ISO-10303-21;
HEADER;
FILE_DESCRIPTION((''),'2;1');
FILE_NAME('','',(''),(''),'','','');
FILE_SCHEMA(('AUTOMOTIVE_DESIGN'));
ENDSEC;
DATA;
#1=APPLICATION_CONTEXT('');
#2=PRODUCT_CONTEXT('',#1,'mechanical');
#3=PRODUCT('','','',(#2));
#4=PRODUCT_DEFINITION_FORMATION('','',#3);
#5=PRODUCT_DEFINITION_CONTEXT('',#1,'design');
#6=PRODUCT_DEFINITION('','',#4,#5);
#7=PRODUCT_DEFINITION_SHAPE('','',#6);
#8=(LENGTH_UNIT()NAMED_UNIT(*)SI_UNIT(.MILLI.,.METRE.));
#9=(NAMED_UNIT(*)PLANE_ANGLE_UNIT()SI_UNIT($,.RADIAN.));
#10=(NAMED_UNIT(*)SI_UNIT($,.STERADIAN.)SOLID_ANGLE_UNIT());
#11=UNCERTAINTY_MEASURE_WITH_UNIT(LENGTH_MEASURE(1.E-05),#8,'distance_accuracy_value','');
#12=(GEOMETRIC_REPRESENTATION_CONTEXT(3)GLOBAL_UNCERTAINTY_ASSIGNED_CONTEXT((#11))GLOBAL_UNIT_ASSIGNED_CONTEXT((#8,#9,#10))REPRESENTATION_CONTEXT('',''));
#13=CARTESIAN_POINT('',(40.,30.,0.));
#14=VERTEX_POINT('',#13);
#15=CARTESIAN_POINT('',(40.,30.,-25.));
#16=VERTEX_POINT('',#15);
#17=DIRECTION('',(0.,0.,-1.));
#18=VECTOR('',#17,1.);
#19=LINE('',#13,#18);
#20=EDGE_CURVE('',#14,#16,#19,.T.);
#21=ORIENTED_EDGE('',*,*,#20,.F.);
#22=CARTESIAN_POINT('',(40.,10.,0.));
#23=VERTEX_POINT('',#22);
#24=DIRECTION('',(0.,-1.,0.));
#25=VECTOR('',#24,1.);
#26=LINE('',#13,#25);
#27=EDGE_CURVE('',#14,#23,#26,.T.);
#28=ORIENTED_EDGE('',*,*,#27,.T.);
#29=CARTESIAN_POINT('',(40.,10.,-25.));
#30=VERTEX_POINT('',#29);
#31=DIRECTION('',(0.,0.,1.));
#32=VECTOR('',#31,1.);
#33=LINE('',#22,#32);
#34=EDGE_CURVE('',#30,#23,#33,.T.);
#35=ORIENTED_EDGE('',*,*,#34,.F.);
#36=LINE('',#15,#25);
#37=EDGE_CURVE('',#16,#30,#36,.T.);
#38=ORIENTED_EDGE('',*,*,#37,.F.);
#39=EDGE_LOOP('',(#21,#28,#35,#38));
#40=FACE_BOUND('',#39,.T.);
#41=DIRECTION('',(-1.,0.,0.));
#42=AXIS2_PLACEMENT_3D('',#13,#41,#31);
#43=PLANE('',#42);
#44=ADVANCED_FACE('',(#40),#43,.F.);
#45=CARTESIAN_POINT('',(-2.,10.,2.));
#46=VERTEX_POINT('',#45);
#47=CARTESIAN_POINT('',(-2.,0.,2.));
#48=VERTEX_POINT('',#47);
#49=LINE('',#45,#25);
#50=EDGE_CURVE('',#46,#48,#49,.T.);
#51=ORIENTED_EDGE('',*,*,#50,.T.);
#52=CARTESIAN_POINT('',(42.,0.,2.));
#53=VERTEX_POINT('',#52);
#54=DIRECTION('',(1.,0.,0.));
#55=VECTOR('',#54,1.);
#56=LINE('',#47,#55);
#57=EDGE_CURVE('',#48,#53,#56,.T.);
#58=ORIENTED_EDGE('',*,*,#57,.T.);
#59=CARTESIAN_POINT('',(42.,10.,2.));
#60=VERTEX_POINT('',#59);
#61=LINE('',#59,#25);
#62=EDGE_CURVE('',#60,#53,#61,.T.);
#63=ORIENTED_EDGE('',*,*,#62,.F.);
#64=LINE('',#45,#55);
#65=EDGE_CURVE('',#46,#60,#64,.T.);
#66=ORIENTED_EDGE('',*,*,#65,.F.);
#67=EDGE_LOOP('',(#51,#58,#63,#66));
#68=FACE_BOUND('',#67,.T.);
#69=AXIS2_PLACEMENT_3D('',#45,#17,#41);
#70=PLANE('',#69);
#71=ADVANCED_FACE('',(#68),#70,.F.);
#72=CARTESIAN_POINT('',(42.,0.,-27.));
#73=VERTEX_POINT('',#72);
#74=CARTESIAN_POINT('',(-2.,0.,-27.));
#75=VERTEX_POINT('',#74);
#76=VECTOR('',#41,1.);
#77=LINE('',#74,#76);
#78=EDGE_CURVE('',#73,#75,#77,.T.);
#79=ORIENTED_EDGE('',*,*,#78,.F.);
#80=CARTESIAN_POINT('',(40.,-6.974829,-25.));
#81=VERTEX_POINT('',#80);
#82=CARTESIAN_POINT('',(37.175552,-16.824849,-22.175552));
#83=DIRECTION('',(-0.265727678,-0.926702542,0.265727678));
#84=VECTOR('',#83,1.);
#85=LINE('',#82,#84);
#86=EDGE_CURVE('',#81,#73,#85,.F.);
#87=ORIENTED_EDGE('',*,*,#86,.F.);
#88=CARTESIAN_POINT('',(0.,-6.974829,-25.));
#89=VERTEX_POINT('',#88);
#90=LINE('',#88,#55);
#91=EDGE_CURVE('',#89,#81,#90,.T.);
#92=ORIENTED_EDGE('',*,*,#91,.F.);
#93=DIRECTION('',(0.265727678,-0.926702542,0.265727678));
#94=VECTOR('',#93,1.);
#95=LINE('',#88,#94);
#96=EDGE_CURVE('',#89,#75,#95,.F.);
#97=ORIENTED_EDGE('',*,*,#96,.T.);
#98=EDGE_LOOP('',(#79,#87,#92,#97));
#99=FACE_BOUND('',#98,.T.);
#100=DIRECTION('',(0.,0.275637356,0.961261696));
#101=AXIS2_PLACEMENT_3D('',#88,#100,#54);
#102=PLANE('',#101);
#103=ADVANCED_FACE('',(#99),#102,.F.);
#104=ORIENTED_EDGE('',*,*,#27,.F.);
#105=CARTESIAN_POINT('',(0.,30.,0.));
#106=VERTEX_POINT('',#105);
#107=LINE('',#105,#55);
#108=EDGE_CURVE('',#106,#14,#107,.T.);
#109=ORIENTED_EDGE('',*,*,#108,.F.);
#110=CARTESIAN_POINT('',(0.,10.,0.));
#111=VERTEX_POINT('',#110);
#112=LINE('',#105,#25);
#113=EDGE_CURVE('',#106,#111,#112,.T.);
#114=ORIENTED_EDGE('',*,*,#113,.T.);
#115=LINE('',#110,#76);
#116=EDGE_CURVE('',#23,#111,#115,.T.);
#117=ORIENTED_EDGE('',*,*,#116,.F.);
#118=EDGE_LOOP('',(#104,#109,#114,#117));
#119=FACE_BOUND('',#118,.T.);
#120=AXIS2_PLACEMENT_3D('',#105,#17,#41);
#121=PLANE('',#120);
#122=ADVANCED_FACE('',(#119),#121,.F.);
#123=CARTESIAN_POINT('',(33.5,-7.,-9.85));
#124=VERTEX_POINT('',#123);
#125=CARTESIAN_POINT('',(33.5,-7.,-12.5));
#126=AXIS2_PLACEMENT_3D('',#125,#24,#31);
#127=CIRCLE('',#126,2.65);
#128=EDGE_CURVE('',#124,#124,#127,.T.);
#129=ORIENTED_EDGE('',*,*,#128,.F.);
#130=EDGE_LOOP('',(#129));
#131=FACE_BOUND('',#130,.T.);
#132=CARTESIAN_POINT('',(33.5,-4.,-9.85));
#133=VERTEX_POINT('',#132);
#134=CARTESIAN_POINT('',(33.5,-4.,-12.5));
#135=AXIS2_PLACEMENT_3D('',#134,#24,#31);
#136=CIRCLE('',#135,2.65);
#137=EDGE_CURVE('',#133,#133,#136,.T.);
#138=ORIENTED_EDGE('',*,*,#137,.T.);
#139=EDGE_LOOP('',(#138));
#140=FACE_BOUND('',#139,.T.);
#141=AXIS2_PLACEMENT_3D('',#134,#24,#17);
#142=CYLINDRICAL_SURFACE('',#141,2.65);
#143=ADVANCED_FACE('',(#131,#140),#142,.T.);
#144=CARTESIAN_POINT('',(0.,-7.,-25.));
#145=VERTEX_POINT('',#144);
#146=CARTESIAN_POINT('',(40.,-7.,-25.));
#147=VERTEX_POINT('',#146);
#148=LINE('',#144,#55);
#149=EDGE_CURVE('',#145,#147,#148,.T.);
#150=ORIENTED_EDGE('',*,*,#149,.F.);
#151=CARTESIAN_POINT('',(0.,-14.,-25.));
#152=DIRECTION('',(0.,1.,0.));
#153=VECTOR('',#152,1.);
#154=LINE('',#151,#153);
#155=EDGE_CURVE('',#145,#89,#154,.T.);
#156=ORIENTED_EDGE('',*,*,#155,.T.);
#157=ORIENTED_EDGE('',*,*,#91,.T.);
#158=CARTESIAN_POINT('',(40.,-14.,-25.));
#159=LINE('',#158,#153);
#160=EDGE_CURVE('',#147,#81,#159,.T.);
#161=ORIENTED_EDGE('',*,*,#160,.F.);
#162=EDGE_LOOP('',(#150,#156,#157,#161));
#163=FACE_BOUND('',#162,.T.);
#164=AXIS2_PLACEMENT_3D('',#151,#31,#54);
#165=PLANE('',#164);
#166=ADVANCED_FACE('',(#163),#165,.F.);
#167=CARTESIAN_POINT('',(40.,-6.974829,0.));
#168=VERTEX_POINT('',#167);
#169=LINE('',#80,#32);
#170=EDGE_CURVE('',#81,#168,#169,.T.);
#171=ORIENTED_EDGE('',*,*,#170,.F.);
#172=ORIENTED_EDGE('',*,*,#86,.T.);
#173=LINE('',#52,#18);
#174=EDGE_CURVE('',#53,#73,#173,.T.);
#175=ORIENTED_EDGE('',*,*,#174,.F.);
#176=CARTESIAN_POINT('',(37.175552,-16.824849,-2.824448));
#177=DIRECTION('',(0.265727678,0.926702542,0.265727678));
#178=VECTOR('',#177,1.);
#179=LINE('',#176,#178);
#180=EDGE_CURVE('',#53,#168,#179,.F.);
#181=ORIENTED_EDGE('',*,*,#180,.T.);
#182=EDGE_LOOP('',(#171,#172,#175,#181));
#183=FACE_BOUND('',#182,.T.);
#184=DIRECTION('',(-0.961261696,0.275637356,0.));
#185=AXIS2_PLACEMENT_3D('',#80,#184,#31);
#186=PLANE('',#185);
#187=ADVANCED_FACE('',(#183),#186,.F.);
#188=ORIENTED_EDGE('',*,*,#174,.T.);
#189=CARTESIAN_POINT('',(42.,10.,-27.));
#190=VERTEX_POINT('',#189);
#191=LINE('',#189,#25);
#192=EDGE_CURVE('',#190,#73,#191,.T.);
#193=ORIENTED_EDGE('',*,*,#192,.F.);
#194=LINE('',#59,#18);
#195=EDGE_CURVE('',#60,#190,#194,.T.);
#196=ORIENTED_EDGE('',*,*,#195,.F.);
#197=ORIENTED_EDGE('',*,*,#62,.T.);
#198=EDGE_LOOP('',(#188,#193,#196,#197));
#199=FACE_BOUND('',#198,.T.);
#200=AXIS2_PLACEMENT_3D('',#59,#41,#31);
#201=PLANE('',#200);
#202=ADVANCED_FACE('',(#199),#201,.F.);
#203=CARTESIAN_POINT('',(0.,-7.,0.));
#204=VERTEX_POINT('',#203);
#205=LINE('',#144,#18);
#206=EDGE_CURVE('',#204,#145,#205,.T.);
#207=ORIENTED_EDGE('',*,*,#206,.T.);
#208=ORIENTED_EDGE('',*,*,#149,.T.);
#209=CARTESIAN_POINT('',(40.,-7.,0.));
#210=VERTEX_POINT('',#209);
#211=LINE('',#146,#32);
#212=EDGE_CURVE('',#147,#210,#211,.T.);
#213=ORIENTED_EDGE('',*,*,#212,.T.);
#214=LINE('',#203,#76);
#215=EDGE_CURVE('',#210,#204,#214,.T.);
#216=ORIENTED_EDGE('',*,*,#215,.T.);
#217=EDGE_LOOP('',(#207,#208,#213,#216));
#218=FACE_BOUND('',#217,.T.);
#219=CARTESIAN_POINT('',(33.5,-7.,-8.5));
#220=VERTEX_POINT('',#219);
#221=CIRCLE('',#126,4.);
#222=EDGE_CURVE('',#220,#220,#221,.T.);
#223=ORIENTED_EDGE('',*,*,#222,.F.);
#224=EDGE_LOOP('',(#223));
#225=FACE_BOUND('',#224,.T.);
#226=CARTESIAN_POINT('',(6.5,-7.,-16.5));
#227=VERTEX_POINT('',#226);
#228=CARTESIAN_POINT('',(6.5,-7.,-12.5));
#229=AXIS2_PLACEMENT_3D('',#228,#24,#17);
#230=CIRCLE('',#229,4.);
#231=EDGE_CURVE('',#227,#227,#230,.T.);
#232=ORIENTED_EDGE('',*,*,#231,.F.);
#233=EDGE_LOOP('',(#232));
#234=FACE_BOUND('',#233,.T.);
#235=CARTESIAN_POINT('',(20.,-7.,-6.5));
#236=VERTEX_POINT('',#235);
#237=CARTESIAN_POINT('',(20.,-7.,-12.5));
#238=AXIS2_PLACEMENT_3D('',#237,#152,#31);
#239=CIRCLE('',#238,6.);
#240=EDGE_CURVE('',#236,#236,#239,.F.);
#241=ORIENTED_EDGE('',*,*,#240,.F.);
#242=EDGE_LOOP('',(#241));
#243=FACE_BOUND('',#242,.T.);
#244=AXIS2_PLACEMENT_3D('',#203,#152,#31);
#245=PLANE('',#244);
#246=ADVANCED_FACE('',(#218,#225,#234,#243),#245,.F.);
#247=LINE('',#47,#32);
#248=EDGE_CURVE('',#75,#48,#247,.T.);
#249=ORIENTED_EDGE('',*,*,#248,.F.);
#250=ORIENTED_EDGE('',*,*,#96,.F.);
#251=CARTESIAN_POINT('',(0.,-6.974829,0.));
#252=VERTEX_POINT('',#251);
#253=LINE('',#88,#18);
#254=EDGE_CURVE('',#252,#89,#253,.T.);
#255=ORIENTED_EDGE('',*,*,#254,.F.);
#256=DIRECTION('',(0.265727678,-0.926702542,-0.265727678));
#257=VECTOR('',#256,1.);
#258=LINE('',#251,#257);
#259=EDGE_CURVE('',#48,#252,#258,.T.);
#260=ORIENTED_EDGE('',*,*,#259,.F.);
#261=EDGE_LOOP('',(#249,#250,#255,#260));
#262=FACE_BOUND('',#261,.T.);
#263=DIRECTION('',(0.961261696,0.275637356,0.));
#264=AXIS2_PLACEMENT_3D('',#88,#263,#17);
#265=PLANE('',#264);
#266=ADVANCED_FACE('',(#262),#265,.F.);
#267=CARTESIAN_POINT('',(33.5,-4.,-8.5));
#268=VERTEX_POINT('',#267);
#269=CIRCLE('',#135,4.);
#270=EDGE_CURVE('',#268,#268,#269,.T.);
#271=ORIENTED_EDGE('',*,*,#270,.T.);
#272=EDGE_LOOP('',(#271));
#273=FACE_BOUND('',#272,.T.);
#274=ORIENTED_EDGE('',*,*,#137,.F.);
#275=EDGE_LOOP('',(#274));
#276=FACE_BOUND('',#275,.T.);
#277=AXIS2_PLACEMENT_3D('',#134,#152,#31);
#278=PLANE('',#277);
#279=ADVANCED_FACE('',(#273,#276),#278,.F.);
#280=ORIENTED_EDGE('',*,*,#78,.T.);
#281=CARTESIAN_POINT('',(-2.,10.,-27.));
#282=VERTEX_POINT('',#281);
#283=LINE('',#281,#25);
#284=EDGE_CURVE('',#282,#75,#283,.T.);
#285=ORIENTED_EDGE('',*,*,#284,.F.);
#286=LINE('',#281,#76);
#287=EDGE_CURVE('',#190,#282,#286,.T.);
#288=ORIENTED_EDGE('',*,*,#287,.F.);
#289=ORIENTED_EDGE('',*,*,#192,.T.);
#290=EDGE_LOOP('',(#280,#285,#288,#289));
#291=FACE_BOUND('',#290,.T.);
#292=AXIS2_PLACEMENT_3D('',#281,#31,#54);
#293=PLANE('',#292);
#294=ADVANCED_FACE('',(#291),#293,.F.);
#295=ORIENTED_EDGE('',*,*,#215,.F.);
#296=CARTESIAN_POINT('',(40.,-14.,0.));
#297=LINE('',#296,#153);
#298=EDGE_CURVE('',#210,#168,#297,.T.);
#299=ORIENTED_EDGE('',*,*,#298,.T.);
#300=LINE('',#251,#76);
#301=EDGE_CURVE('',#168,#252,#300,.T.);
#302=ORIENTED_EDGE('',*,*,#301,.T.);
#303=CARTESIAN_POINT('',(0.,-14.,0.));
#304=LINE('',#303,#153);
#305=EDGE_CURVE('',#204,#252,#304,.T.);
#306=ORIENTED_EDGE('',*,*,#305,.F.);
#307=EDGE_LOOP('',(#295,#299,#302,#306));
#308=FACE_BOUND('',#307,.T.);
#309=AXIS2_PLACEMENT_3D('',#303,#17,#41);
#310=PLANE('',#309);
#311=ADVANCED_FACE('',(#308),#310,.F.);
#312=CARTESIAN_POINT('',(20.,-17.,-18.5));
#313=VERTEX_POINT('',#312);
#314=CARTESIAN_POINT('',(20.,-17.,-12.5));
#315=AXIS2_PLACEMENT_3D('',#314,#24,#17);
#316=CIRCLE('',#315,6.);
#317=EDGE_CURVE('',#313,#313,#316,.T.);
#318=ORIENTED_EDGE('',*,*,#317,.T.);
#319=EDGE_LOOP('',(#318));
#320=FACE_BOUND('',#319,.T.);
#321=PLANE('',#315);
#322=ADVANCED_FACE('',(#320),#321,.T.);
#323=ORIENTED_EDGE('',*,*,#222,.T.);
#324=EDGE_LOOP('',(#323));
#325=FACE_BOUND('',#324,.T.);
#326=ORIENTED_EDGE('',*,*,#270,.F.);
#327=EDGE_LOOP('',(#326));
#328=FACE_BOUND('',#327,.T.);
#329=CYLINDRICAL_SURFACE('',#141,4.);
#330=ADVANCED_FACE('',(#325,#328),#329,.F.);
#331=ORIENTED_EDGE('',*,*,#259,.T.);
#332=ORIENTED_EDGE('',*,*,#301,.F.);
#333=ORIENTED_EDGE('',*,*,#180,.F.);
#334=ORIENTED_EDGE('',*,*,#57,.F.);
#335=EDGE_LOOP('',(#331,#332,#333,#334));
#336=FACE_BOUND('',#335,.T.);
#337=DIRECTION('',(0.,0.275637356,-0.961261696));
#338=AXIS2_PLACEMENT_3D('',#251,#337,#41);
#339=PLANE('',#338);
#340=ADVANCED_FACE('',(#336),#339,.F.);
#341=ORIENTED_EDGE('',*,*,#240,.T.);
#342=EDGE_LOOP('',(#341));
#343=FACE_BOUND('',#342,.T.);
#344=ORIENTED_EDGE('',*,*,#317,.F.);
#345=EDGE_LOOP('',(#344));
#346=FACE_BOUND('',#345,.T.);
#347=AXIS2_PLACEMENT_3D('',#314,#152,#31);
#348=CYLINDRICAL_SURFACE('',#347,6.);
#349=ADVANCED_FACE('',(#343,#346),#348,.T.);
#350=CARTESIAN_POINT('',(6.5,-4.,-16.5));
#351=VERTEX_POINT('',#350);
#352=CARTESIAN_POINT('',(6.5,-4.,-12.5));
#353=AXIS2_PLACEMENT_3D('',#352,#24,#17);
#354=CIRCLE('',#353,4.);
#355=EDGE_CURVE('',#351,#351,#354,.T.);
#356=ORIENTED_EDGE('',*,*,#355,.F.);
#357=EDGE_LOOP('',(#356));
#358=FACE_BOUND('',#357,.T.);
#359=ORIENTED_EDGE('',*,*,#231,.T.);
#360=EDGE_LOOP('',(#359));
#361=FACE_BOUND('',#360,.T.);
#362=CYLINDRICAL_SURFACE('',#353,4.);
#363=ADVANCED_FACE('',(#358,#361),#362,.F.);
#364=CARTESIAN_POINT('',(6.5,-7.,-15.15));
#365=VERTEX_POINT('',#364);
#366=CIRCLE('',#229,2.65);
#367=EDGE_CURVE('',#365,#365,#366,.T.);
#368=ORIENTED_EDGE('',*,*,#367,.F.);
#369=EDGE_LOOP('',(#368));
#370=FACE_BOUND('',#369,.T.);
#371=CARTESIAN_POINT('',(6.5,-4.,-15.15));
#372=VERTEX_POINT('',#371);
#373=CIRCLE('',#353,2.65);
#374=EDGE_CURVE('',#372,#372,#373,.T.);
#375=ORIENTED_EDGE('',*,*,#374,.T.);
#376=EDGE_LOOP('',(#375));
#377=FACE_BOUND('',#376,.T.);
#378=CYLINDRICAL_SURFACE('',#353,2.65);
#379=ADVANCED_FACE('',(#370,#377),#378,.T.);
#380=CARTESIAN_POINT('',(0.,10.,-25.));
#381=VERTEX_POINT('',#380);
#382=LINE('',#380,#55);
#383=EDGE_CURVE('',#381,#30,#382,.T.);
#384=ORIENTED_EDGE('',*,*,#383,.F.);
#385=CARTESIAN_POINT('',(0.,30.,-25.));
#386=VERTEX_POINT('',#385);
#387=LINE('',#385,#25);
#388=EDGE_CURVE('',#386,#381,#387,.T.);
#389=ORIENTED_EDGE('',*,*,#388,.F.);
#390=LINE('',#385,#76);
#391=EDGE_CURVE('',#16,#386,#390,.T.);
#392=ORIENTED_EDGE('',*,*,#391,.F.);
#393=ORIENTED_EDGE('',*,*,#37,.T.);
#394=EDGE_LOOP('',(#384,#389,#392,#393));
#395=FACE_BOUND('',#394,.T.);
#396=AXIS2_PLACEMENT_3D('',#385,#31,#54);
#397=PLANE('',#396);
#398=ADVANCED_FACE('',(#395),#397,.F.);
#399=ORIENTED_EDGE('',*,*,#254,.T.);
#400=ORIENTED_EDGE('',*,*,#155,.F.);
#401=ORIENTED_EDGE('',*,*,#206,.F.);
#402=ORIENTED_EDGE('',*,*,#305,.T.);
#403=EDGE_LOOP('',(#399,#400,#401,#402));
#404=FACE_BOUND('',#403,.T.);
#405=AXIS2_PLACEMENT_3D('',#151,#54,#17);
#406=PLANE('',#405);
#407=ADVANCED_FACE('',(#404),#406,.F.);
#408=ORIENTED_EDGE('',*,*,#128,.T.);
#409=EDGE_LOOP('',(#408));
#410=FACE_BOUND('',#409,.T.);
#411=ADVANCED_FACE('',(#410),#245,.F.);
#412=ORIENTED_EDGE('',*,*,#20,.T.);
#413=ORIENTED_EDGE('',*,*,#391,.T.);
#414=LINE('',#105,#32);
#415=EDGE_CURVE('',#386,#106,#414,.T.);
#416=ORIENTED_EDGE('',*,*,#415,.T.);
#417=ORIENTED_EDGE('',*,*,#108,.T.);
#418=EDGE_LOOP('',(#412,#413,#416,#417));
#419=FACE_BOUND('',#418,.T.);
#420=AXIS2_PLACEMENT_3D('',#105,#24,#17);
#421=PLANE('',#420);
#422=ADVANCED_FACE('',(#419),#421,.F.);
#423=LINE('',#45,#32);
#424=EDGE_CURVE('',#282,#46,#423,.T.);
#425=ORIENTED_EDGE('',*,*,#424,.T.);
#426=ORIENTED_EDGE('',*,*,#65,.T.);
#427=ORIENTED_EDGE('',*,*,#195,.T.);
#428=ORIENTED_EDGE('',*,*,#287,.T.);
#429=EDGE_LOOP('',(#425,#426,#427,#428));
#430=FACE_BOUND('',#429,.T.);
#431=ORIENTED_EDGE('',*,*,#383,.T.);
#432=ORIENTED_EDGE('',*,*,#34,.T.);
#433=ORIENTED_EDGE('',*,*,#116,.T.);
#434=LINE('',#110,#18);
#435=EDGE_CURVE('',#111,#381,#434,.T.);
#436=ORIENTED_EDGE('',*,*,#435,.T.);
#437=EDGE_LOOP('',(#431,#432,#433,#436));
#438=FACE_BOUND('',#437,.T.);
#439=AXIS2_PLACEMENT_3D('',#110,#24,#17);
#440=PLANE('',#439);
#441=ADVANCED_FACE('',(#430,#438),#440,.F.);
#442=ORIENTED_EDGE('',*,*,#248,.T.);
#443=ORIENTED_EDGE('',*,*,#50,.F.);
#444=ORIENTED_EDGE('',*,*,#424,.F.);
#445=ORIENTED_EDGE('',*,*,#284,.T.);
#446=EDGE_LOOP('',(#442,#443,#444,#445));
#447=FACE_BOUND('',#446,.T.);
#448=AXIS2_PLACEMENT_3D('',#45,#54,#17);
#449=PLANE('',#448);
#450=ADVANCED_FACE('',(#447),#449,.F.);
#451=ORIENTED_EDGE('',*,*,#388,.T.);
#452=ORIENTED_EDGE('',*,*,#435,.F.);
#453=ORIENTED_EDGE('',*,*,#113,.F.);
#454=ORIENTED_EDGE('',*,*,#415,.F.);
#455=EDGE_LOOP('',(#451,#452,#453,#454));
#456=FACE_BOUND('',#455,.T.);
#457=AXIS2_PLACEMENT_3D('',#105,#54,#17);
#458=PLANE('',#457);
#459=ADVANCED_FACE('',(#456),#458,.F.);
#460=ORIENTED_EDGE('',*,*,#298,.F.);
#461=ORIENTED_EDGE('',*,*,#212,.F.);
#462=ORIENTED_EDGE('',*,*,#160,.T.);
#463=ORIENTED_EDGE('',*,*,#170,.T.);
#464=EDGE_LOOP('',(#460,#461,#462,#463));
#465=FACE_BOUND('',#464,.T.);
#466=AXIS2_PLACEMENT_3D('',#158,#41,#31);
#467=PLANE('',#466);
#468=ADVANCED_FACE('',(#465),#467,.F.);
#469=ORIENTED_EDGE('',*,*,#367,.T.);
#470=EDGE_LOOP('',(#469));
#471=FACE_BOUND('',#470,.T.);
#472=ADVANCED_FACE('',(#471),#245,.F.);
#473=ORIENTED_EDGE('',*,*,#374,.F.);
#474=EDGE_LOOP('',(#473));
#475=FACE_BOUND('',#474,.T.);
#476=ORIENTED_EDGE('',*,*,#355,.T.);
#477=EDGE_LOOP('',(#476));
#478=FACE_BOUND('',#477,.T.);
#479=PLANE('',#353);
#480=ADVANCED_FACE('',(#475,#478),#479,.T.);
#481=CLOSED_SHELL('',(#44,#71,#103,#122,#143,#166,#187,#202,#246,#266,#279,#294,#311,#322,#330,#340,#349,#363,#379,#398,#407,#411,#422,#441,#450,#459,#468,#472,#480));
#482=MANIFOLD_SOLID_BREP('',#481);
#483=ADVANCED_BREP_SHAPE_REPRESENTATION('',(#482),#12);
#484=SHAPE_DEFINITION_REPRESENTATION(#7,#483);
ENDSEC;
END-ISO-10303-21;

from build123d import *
from OCP.BRepFilletAPI import BRepFilletAPI_MakeChamfer

# Parameters (mm, degrees)
SKETCH1_W           = 40
SKETCH1_H           = 25
BOSS_EXTRUDE1_DEPTH = 30
SKETCH2_W           = 44
SKETCH2_H           = 29
BOSS_EXTRUDE2_DEPTH = 10
SKETCH3_W           = 40
SKETCH3_H           = 25
BOSS_EXTRUDE3_DEPTH = 14
SKETCH4_W           = 40
SKETCH4_H           = 25
CUT_EXTRUDE1_DEPTH  = 7
SKETCH5_R           = 4
SKETCH5_R_2         = 2.65
CUT_EXTRUDE2_DEPTH  = 3
SKETCH6_R           = 6
BOSS_EXTRUDE4_DEPTH = 10
CHAMFER1_SIZE       = 2
CHAMFER1_SIZE_2     = 6.974828888


with BuildPart() as part:
    # Sketch1 → Boss-Extrude1 (new body)
    with BuildSketch(Plane(origin=(0, 0, 0), x_dir=(1, 0, 0), z_dir=(0, 1, 0))):
        with Locations((20, 12.5)):
            Rectangle(SKETCH1_W, SKETCH1_H)
    extrude(amount=BOSS_EXTRUDE1_DEPTH)

    # Sketch2 → Boss-Extrude2 (add)
    with BuildSketch(Plane(origin=(0, 0, 0), x_dir=(1, 0, 0), z_dir=(0, 1, 0))):
        with Locations((20, 12.5)):
            Rectangle(SKETCH2_W, SKETCH2_H)
    extrude(amount=BOSS_EXTRUDE2_DEPTH)

    # Sketch3 → Boss-Extrude3 (add)
    with BuildSketch(Plane.XZ):
        with Locations((20, -12.5)):
            Rectangle(SKETCH3_W, SKETCH3_H)
    extrude(amount=BOSS_EXTRUDE3_DEPTH)

    # Sketch4 → Cut-Extrude1 (cut)
    with BuildSketch(Plane.XZ.offset(14)):
        with Locations((20, -12.5)):
            Rectangle(SKETCH4_W, SKETCH4_H)
    extrude(amount=-CUT_EXTRUDE1_DEPTH, mode=Mode.SUBTRACT)

    # Sketch5 → Cut-Extrude2 (cut)
    # profile 1 of 2: a face of its own
    with BuildSketch(Plane.XZ.offset(7)):
        with Locations(Location((6.5, -12.5, 0), (0, 0, 270))):
            Circle(SKETCH5_R)
        with Locations(Location((6.5, -12.5, 0), (0, 0, 270))):
            Circle(SKETCH5_R_2, mode=Mode.SUBTRACT)
    # profile 2 of 2: a face of its own
    with BuildSketch(Plane.XZ.offset(7)):
        with Locations(Location((33.5, -12.5, 0), (0, 0, 90))):
            Circle(SKETCH5_R)
        with Locations(Location((33.5, -12.5, 0), (0, 0, 90))):
            Circle(SKETCH5_R_2, mode=Mode.SUBTRACT)
    extrude(amount=-CUT_EXTRUDE2_DEPTH, mode=Mode.SUBTRACT)

    # Sketch6 → Boss-Extrude4 (add)
    with BuildSketch(Plane.XZ.offset(7)):
        with Locations(Location((20, -12.5, 0), (0, 0, 90))):
            Circle(SKETCH6_R)
    extrude(amount=BOSS_EXTRUDE4_DEPTH)

    # Chamfer1
    chamfer1_edges_1 = [part.edges().sort_by_distance(p)[0] for p in [
        (0, 0, -12.5),
    ]]
    chamfer1_side_1 = [part.faces().sort_by_distance(p)[0] for p in [
        (-0.04, 0, -12.5),
    ]]
    chamfer1_edges_2 = [part.edges().sort_by_distance(p)[0] for p in [
        (20, 0, -25),
    ]]
    chamfer1_side_2 = [part.faces().sort_by_distance(p)[0] for p in [
        (20, 0, -25.04),
    ]]
    chamfer1_edges_3 = [part.edges().sort_by_distance(p)[0] for p in [
        (40, 0, -12.5),
    ]]
    chamfer1_side_3 = [part.faces().sort_by_distance(p)[0] for p in [
        (40.04, 0, -12.5),
    ]]
    chamfer1_edges_4 = [part.edges().sort_by_distance(p)[0] for p in [
        (20, 0, 0),
    ]]
    chamfer1_side_4 = [part.faces().sort_by_distance(p)[0] for p in [
        (20, 0, 0.04),
    ]]
    chamfer1 = BRepFilletAPI_MakeChamfer(part.part.solid().wrapped)
    for e in chamfer1_edges_1:
        chamfer1.Add(CHAMFER1_SIZE - 0.0001, CHAMFER1_SIZE_2 - 0.0001, e.wrapped, chamfer1_side_1[0].wrapped)
    for e in chamfer1_edges_2:
        chamfer1.Add(CHAMFER1_SIZE - 0.0001, CHAMFER1_SIZE_2 - 0.0001, e.wrapped, chamfer1_side_2[0].wrapped)
    for e in chamfer1_edges_3:
        chamfer1.Add(CHAMFER1_SIZE - 0.0001, CHAMFER1_SIZE_2 - 0.0001, e.wrapped, chamfer1_side_3[0].wrapped)
    for e in chamfer1_edges_4:
        chamfer1.Add(CHAMFER1_SIZE - 0.0001, CHAMFER1_SIZE_2 - 0.0001, e.wrapped, chamfer1_side_4[0].wrapped)
    add(Compound.cast(chamfer1.Shape()), mode=Mode.REPLACE)  # a hair under: the kernel refuses the full size


solid = part.part
